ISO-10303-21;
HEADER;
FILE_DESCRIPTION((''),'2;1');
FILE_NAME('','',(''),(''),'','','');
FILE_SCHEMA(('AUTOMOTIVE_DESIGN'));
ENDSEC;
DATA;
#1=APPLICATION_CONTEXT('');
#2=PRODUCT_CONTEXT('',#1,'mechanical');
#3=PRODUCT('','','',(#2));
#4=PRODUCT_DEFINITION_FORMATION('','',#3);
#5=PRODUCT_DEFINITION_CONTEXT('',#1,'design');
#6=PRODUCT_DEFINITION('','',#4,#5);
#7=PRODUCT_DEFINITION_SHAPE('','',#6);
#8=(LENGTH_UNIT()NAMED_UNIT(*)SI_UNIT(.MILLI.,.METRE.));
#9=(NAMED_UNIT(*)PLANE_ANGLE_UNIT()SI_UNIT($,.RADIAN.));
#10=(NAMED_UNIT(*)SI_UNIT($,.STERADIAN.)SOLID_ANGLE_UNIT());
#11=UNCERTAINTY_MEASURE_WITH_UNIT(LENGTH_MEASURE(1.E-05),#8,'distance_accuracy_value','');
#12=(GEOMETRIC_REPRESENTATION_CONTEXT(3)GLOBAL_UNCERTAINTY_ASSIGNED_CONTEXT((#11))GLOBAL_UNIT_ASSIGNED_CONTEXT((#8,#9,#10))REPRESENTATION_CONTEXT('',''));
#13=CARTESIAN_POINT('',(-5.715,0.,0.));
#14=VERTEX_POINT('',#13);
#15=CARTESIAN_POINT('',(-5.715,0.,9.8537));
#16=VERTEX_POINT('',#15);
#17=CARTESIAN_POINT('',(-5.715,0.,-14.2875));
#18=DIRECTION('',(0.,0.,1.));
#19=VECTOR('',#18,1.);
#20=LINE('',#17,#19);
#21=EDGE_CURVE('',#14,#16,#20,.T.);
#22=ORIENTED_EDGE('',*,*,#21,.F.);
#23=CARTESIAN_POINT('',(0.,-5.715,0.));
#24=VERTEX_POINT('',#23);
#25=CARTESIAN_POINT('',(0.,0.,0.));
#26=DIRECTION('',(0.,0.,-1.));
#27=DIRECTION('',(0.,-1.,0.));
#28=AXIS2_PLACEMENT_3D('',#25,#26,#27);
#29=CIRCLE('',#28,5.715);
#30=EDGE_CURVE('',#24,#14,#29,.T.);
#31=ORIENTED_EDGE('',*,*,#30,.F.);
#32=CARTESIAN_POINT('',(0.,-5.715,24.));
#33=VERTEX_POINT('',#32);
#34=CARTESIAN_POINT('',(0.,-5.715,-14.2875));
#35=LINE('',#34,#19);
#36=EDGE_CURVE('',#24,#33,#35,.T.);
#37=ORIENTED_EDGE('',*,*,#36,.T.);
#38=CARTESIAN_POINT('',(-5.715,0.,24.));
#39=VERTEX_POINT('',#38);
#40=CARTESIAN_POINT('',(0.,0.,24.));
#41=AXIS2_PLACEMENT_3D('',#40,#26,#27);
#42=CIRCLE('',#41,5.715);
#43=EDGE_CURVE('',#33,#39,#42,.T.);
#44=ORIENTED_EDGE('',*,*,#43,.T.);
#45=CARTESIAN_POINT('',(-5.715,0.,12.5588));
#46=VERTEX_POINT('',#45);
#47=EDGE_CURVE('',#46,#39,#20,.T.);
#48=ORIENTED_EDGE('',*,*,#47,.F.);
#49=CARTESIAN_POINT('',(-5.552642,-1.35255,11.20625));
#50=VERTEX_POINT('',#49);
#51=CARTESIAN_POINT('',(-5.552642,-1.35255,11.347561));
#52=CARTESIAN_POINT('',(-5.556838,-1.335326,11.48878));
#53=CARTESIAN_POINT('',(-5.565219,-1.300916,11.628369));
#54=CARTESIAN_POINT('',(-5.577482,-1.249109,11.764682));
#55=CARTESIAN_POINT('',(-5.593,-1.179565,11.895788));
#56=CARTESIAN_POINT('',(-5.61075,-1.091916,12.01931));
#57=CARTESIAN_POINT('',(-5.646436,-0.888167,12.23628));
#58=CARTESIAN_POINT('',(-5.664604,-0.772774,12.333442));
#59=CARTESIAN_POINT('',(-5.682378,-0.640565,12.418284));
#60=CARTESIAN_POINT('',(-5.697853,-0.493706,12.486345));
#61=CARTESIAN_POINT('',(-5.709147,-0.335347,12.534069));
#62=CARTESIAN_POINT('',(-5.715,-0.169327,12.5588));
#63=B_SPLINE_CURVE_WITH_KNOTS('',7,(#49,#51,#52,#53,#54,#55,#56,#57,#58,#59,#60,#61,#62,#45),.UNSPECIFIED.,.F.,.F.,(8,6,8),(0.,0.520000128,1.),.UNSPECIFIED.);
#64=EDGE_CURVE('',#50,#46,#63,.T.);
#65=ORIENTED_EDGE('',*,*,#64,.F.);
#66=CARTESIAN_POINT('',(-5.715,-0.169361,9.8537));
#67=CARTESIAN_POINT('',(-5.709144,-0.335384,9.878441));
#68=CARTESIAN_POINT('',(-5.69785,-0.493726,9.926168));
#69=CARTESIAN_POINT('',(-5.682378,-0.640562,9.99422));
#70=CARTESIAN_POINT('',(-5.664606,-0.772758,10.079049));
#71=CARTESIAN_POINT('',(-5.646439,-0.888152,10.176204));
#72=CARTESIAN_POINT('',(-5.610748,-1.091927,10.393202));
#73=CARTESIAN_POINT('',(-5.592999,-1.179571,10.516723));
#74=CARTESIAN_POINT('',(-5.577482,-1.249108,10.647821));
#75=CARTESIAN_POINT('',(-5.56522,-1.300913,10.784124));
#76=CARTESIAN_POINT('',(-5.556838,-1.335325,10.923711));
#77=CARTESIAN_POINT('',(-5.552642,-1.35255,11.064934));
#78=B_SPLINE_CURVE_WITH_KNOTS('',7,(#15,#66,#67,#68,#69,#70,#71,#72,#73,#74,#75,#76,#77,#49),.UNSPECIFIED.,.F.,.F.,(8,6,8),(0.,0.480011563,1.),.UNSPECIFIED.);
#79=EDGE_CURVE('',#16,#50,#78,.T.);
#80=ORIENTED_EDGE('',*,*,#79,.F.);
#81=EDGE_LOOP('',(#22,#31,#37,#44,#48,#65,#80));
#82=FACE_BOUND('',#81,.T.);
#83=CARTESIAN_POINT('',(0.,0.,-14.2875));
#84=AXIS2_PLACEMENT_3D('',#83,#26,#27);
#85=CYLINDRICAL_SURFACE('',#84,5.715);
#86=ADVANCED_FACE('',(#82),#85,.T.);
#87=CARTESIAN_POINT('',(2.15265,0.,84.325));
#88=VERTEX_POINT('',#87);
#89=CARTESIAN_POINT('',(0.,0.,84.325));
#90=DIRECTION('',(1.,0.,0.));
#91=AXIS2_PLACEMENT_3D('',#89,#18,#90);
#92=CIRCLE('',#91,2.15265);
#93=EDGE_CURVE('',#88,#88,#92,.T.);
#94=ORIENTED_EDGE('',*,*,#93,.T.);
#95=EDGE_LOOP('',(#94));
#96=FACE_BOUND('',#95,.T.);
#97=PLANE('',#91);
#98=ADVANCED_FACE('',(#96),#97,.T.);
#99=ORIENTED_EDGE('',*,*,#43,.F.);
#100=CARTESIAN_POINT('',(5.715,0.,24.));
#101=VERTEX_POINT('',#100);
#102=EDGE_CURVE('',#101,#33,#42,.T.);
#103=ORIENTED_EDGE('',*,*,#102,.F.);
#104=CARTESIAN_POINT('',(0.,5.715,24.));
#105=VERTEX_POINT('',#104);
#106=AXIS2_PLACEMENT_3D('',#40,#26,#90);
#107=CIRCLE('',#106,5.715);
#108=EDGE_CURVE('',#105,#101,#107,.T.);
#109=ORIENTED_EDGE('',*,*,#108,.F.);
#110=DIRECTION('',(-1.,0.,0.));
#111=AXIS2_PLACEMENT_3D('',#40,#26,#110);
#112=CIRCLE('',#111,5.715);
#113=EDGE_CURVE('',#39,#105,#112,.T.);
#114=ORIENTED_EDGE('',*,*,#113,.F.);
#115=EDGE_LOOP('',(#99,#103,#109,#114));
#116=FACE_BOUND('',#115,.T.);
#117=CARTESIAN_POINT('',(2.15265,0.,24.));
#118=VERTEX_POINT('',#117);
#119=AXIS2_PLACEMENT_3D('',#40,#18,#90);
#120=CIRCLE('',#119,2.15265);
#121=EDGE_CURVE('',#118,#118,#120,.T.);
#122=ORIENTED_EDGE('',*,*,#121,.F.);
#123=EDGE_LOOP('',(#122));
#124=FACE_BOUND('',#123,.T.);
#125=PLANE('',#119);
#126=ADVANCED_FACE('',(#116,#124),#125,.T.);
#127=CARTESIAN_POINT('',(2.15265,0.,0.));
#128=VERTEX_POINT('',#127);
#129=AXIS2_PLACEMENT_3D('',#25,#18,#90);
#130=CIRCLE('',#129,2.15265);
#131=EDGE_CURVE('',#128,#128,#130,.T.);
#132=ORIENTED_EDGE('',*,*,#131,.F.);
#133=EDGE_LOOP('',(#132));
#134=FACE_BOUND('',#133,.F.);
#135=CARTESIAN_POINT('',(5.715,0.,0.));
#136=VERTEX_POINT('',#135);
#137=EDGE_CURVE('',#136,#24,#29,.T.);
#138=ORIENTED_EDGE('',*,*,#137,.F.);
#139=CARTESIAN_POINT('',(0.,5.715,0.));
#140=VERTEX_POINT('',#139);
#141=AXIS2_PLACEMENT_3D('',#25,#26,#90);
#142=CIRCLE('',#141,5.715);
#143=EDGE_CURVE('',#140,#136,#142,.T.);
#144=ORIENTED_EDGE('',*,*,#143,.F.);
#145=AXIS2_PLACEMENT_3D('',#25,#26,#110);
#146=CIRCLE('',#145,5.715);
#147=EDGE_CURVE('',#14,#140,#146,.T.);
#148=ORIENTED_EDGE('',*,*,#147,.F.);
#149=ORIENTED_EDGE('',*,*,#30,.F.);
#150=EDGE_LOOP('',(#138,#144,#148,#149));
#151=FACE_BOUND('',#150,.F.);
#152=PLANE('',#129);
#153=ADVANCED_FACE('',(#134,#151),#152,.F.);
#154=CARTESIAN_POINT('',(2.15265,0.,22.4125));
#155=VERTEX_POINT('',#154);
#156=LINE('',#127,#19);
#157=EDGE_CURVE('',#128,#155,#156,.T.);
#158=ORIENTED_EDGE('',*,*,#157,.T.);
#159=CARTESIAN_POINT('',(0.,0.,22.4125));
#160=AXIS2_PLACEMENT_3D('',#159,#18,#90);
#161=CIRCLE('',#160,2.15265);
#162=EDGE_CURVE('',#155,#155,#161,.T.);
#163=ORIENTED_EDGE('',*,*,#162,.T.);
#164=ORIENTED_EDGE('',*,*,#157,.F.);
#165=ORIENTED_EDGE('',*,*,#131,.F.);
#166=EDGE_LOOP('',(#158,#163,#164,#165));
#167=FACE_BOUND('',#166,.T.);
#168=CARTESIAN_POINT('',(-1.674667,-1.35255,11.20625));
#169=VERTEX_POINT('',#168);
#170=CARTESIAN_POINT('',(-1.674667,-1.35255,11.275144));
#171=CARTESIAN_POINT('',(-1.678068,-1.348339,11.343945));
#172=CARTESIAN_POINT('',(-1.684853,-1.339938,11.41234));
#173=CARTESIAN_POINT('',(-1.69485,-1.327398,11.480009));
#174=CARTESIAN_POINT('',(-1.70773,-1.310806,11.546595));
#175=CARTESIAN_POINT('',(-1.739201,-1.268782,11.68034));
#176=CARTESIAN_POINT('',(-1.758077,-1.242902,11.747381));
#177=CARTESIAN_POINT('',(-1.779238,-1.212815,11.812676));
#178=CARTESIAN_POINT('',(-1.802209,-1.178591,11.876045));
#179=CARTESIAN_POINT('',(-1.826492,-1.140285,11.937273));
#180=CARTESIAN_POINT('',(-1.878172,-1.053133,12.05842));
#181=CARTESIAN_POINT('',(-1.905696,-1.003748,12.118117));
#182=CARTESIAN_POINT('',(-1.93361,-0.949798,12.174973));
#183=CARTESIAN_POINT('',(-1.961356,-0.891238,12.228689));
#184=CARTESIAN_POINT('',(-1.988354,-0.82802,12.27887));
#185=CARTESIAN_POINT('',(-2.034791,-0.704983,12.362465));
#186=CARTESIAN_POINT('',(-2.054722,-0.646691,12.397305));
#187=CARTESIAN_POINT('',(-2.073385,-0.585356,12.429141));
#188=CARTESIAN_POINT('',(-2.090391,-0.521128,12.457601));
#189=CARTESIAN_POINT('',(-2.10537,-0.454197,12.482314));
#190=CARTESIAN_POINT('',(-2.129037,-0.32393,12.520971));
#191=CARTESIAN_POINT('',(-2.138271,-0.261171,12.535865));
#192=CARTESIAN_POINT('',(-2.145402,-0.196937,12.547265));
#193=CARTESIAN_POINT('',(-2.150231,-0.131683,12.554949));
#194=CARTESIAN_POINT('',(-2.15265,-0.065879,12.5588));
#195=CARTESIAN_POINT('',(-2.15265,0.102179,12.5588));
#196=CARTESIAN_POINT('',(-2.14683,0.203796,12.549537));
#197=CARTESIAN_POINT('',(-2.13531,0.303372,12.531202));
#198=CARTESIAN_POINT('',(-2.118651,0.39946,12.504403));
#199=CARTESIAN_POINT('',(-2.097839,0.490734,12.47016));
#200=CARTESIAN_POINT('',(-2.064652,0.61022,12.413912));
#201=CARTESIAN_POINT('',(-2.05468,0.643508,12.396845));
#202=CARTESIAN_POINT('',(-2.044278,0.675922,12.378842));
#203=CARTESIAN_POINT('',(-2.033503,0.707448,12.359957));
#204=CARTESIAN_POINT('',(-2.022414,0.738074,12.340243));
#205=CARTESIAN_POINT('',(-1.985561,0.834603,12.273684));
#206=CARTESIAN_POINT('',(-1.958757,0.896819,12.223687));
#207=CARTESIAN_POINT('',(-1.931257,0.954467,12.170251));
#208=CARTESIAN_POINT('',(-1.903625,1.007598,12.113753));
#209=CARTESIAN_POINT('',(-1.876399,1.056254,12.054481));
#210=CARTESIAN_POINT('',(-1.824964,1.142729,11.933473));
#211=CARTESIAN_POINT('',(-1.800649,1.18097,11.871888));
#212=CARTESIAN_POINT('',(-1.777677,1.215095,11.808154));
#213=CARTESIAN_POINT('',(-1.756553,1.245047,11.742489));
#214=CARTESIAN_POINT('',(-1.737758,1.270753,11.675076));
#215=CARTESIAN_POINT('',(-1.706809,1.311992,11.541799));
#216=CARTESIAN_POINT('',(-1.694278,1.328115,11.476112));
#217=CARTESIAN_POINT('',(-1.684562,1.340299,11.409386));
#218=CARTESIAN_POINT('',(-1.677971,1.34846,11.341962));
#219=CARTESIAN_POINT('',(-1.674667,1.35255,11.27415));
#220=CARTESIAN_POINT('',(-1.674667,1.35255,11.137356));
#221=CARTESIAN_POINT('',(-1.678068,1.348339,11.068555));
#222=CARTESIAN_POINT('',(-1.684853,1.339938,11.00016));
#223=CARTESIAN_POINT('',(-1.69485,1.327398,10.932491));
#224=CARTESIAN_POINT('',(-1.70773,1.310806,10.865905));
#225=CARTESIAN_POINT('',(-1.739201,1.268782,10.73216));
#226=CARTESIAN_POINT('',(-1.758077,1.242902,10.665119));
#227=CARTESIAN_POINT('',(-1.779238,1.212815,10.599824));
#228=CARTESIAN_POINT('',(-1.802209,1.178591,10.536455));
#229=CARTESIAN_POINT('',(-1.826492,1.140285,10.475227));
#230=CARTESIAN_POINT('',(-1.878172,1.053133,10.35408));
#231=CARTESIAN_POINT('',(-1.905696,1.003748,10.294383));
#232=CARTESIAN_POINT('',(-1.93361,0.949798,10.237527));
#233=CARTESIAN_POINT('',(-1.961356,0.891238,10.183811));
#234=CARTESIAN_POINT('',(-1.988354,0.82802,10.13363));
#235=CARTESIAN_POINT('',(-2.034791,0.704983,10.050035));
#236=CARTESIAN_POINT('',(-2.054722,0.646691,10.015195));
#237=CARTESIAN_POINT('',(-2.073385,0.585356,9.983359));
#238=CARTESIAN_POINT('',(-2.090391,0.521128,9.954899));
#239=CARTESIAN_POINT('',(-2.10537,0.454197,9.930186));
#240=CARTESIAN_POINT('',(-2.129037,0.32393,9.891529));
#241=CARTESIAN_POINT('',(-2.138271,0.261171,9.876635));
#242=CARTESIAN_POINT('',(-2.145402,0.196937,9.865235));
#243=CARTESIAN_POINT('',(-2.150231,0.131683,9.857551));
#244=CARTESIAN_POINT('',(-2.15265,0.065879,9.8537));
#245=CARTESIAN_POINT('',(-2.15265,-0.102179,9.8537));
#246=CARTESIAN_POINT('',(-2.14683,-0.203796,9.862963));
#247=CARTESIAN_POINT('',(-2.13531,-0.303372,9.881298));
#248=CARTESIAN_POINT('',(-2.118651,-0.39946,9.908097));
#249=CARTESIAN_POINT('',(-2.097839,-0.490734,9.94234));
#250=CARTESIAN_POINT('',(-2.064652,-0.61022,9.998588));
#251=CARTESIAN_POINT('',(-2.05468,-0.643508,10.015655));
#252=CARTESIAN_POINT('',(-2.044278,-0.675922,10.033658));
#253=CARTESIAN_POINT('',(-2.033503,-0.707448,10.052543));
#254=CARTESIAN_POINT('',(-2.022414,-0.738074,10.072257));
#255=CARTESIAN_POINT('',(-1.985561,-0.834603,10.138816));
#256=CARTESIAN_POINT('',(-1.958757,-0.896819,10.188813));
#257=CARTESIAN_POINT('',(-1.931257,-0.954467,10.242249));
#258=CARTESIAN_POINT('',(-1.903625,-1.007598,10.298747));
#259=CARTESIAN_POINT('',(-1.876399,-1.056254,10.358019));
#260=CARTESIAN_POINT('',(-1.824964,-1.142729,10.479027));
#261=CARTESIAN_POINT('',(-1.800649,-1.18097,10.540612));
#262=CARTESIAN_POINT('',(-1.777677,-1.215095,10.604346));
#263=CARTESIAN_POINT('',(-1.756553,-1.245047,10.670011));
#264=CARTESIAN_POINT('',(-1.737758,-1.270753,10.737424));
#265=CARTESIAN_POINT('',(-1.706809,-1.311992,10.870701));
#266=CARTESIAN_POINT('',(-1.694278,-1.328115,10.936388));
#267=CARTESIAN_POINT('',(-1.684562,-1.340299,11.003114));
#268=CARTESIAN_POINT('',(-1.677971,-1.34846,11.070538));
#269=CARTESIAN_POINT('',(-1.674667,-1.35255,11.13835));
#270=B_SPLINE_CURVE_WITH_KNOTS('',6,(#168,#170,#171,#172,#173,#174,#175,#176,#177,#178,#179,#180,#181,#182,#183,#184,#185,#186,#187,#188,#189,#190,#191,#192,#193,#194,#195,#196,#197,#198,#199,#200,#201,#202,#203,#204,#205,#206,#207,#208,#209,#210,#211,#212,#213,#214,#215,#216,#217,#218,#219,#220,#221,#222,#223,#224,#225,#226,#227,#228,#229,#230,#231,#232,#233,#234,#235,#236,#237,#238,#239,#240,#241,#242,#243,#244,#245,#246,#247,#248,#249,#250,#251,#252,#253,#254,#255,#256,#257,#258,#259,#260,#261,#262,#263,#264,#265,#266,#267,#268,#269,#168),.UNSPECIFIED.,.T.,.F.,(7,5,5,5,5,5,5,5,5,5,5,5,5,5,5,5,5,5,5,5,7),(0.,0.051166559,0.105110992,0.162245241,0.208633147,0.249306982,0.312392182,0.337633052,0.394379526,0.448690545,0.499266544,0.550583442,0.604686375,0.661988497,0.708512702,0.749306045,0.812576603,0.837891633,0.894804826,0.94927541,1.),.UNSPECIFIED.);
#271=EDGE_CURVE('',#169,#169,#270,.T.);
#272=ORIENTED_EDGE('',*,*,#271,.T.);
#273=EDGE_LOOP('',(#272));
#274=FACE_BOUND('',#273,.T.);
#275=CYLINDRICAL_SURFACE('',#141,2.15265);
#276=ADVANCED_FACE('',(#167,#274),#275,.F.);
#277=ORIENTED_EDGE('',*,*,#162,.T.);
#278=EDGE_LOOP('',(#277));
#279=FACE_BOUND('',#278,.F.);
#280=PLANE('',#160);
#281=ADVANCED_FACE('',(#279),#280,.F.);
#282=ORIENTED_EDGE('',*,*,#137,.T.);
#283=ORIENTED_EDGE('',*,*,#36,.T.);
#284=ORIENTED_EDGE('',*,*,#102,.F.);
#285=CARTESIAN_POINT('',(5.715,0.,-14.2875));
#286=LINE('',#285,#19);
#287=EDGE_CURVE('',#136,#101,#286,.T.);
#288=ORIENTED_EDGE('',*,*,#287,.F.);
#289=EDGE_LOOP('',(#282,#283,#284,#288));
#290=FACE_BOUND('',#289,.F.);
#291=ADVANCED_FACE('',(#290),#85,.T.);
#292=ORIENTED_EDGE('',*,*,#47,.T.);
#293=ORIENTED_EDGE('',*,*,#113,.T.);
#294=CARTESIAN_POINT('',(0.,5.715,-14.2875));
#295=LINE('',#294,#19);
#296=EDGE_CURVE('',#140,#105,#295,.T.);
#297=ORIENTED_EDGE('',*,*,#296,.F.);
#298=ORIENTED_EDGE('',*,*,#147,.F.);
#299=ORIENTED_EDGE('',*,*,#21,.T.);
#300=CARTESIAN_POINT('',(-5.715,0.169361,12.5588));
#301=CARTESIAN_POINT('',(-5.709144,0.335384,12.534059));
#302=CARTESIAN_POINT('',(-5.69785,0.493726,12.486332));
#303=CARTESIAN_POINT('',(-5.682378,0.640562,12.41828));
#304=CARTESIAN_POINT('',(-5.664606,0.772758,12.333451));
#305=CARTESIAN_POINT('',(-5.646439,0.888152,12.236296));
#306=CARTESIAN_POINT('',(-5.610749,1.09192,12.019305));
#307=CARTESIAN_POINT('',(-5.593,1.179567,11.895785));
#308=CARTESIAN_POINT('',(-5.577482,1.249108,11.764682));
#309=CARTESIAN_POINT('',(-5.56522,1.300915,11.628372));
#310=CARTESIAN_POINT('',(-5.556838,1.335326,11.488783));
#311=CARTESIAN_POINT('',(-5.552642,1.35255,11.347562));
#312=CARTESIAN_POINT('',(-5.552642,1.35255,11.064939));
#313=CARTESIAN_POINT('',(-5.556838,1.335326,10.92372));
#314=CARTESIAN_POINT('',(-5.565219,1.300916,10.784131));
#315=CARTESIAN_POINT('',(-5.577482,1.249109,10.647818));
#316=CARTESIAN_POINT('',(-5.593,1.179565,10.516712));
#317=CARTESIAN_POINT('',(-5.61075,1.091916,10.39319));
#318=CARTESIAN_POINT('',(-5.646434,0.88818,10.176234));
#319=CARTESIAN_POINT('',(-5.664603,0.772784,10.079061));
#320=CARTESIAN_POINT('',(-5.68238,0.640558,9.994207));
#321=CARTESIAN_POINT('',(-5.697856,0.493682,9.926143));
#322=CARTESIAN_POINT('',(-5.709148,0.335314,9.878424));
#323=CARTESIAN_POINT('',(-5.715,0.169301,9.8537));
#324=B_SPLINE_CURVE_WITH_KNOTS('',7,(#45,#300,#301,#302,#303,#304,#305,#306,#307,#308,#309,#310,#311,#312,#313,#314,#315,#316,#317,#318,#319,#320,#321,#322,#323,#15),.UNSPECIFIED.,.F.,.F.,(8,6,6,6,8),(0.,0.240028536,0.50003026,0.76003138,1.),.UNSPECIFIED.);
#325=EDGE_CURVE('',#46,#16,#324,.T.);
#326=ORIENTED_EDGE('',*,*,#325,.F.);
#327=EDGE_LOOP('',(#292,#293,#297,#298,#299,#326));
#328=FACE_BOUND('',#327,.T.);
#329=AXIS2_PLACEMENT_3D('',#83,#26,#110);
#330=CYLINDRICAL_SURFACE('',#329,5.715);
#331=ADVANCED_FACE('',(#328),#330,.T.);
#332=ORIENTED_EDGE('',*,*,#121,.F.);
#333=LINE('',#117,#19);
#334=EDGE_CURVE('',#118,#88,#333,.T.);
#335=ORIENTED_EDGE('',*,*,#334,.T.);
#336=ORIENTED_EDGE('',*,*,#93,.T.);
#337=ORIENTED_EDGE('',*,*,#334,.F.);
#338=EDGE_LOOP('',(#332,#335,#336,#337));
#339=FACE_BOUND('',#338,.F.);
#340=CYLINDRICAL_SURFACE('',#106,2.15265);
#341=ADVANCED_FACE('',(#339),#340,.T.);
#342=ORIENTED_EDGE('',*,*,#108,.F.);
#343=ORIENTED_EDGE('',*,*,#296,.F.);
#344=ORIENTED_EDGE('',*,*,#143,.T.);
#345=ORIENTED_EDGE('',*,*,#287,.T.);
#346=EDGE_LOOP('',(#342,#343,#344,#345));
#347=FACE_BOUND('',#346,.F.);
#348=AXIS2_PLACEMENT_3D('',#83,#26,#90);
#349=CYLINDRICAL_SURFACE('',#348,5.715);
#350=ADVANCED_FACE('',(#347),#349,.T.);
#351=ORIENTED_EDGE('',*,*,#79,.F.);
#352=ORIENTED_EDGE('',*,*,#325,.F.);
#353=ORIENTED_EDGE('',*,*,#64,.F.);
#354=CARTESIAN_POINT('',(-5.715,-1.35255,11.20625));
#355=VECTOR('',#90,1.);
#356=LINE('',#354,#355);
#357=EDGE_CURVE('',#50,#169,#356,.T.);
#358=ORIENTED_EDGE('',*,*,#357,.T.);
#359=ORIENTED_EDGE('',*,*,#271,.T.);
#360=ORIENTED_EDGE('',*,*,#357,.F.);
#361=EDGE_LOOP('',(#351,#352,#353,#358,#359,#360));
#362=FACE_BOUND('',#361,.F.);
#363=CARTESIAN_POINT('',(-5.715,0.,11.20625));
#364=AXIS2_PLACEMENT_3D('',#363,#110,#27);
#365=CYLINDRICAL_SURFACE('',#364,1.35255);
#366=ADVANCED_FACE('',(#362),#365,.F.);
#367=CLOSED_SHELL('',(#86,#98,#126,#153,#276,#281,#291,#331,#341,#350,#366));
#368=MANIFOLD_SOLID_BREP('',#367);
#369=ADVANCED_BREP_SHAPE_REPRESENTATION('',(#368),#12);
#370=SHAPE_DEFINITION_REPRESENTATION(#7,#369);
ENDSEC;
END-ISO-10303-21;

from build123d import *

# Parameters (mm, degrees)
F0_W        = 11.43
F0_H        = 11.43
F0_R        = 2.15265
F1_DEPTH    = 22.4125
F2_W        = 11.43
F2_H        = 11.43
F3_DEPTH    = 1.5875
F4_R        = 1.35255
F5_REACH    = 15.2565891076
F6_T1_DEPTH = 52.575
F7_R        = 2.15265
F8_DEPTH    = 60.325


# Not quite as in the source:
# - a fillet or chamfer that OpenCascade refuses, or shapes differently, is made with other operations: its cross-section is extruded or revolved along the edge and cut away or added


with BuildPart() as f1:
    # F0 (on Top) → F1 (new body)
    with BuildSketch(Plane.XY):
        Rectangle(F0_W, F0_H)
        Circle(F0_R, mode=Mode.SUBTRACT)
    extrude(amount=F1_DEPTH)

    # F2 (on face) → F3 (join)
    with BuildSketch(Plane.XY.offset(22.4125)):
        Rectangle(F2_W, F2_H)
    extrude(amount=F3_DEPTH)

    f5_end = f1.faces().sort_by_distance((-2.15265, 0, 11.20625))[0]
    # F4 (on face) → F5 (cut, up to a face of the model that its end follows)
    with BuildSketch(Plane(origin=(-5.715, 0, 0), x_dir=(0, -1, 0), z_dir=(-1, 0, 0))):
        with Locations((0, 11.20625)):
            Circle(F4_R)
    f5_long = extrude(amount=-F5_REACH, mode=Mode.PRIVATE)
    add(split(f5_long, bisect_by=f5_end, keep=Keep.ALL, mode=Mode.PRIVATE).solids().sort_by_distance((-5.715, 0, 11.20625))[0], mode=Mode.SUBTRACT)

    # F6: fillet of radius 5.715 on 4 edges, made by hand

    # F6_s2 → F6_t1 (cut)
    with BuildSketch(Plane.XY.offset(-14.2875)):
        with BuildLine():
            ThreePointArc((0, -5.715), (-4.0411152545, -4.0411152545), (-5.715, 0))
            Line((-5.715, 0), (-5.715, -5.715))
            Line((-5.715, -5.715), (0, -5.715))
        make_face()
        with BuildLine():
            ThreePointArc((0, -5.715), (4.0411152545, -4.0411152545), (5.715, 0))
            Line((5.715, 0), (5.715, -5.715))
            Line((5.715, -5.715), (0, -5.715))
        make_face()
        with BuildLine():
            ThreePointArc((-5.715, 0), (-4.0411152545, 4.0411152545), (0, 5.715))
            Line((0, 5.715), (-5.715, 5.715))
            Line((-5.715, 5.715), (-5.715, 0))
        make_face()
        with BuildLine():
            ThreePointArc((5.715, 0), (4.0411152545, 4.0411152545), (0, 5.715))
            Line((0, 5.715), (5.715, 5.715))
            Line((5.715, 5.715), (5.715, 0))
        make_face()
    extrude(amount=F6_T1_DEPTH, mode=Mode.SUBTRACT)

    # F7 (on face) → F8 (join)
    with BuildSketch(Plane.XY.offset(24)):
        Circle(F7_R)
    extrude(amount=F8_DEPTH)


solid = f1.part
